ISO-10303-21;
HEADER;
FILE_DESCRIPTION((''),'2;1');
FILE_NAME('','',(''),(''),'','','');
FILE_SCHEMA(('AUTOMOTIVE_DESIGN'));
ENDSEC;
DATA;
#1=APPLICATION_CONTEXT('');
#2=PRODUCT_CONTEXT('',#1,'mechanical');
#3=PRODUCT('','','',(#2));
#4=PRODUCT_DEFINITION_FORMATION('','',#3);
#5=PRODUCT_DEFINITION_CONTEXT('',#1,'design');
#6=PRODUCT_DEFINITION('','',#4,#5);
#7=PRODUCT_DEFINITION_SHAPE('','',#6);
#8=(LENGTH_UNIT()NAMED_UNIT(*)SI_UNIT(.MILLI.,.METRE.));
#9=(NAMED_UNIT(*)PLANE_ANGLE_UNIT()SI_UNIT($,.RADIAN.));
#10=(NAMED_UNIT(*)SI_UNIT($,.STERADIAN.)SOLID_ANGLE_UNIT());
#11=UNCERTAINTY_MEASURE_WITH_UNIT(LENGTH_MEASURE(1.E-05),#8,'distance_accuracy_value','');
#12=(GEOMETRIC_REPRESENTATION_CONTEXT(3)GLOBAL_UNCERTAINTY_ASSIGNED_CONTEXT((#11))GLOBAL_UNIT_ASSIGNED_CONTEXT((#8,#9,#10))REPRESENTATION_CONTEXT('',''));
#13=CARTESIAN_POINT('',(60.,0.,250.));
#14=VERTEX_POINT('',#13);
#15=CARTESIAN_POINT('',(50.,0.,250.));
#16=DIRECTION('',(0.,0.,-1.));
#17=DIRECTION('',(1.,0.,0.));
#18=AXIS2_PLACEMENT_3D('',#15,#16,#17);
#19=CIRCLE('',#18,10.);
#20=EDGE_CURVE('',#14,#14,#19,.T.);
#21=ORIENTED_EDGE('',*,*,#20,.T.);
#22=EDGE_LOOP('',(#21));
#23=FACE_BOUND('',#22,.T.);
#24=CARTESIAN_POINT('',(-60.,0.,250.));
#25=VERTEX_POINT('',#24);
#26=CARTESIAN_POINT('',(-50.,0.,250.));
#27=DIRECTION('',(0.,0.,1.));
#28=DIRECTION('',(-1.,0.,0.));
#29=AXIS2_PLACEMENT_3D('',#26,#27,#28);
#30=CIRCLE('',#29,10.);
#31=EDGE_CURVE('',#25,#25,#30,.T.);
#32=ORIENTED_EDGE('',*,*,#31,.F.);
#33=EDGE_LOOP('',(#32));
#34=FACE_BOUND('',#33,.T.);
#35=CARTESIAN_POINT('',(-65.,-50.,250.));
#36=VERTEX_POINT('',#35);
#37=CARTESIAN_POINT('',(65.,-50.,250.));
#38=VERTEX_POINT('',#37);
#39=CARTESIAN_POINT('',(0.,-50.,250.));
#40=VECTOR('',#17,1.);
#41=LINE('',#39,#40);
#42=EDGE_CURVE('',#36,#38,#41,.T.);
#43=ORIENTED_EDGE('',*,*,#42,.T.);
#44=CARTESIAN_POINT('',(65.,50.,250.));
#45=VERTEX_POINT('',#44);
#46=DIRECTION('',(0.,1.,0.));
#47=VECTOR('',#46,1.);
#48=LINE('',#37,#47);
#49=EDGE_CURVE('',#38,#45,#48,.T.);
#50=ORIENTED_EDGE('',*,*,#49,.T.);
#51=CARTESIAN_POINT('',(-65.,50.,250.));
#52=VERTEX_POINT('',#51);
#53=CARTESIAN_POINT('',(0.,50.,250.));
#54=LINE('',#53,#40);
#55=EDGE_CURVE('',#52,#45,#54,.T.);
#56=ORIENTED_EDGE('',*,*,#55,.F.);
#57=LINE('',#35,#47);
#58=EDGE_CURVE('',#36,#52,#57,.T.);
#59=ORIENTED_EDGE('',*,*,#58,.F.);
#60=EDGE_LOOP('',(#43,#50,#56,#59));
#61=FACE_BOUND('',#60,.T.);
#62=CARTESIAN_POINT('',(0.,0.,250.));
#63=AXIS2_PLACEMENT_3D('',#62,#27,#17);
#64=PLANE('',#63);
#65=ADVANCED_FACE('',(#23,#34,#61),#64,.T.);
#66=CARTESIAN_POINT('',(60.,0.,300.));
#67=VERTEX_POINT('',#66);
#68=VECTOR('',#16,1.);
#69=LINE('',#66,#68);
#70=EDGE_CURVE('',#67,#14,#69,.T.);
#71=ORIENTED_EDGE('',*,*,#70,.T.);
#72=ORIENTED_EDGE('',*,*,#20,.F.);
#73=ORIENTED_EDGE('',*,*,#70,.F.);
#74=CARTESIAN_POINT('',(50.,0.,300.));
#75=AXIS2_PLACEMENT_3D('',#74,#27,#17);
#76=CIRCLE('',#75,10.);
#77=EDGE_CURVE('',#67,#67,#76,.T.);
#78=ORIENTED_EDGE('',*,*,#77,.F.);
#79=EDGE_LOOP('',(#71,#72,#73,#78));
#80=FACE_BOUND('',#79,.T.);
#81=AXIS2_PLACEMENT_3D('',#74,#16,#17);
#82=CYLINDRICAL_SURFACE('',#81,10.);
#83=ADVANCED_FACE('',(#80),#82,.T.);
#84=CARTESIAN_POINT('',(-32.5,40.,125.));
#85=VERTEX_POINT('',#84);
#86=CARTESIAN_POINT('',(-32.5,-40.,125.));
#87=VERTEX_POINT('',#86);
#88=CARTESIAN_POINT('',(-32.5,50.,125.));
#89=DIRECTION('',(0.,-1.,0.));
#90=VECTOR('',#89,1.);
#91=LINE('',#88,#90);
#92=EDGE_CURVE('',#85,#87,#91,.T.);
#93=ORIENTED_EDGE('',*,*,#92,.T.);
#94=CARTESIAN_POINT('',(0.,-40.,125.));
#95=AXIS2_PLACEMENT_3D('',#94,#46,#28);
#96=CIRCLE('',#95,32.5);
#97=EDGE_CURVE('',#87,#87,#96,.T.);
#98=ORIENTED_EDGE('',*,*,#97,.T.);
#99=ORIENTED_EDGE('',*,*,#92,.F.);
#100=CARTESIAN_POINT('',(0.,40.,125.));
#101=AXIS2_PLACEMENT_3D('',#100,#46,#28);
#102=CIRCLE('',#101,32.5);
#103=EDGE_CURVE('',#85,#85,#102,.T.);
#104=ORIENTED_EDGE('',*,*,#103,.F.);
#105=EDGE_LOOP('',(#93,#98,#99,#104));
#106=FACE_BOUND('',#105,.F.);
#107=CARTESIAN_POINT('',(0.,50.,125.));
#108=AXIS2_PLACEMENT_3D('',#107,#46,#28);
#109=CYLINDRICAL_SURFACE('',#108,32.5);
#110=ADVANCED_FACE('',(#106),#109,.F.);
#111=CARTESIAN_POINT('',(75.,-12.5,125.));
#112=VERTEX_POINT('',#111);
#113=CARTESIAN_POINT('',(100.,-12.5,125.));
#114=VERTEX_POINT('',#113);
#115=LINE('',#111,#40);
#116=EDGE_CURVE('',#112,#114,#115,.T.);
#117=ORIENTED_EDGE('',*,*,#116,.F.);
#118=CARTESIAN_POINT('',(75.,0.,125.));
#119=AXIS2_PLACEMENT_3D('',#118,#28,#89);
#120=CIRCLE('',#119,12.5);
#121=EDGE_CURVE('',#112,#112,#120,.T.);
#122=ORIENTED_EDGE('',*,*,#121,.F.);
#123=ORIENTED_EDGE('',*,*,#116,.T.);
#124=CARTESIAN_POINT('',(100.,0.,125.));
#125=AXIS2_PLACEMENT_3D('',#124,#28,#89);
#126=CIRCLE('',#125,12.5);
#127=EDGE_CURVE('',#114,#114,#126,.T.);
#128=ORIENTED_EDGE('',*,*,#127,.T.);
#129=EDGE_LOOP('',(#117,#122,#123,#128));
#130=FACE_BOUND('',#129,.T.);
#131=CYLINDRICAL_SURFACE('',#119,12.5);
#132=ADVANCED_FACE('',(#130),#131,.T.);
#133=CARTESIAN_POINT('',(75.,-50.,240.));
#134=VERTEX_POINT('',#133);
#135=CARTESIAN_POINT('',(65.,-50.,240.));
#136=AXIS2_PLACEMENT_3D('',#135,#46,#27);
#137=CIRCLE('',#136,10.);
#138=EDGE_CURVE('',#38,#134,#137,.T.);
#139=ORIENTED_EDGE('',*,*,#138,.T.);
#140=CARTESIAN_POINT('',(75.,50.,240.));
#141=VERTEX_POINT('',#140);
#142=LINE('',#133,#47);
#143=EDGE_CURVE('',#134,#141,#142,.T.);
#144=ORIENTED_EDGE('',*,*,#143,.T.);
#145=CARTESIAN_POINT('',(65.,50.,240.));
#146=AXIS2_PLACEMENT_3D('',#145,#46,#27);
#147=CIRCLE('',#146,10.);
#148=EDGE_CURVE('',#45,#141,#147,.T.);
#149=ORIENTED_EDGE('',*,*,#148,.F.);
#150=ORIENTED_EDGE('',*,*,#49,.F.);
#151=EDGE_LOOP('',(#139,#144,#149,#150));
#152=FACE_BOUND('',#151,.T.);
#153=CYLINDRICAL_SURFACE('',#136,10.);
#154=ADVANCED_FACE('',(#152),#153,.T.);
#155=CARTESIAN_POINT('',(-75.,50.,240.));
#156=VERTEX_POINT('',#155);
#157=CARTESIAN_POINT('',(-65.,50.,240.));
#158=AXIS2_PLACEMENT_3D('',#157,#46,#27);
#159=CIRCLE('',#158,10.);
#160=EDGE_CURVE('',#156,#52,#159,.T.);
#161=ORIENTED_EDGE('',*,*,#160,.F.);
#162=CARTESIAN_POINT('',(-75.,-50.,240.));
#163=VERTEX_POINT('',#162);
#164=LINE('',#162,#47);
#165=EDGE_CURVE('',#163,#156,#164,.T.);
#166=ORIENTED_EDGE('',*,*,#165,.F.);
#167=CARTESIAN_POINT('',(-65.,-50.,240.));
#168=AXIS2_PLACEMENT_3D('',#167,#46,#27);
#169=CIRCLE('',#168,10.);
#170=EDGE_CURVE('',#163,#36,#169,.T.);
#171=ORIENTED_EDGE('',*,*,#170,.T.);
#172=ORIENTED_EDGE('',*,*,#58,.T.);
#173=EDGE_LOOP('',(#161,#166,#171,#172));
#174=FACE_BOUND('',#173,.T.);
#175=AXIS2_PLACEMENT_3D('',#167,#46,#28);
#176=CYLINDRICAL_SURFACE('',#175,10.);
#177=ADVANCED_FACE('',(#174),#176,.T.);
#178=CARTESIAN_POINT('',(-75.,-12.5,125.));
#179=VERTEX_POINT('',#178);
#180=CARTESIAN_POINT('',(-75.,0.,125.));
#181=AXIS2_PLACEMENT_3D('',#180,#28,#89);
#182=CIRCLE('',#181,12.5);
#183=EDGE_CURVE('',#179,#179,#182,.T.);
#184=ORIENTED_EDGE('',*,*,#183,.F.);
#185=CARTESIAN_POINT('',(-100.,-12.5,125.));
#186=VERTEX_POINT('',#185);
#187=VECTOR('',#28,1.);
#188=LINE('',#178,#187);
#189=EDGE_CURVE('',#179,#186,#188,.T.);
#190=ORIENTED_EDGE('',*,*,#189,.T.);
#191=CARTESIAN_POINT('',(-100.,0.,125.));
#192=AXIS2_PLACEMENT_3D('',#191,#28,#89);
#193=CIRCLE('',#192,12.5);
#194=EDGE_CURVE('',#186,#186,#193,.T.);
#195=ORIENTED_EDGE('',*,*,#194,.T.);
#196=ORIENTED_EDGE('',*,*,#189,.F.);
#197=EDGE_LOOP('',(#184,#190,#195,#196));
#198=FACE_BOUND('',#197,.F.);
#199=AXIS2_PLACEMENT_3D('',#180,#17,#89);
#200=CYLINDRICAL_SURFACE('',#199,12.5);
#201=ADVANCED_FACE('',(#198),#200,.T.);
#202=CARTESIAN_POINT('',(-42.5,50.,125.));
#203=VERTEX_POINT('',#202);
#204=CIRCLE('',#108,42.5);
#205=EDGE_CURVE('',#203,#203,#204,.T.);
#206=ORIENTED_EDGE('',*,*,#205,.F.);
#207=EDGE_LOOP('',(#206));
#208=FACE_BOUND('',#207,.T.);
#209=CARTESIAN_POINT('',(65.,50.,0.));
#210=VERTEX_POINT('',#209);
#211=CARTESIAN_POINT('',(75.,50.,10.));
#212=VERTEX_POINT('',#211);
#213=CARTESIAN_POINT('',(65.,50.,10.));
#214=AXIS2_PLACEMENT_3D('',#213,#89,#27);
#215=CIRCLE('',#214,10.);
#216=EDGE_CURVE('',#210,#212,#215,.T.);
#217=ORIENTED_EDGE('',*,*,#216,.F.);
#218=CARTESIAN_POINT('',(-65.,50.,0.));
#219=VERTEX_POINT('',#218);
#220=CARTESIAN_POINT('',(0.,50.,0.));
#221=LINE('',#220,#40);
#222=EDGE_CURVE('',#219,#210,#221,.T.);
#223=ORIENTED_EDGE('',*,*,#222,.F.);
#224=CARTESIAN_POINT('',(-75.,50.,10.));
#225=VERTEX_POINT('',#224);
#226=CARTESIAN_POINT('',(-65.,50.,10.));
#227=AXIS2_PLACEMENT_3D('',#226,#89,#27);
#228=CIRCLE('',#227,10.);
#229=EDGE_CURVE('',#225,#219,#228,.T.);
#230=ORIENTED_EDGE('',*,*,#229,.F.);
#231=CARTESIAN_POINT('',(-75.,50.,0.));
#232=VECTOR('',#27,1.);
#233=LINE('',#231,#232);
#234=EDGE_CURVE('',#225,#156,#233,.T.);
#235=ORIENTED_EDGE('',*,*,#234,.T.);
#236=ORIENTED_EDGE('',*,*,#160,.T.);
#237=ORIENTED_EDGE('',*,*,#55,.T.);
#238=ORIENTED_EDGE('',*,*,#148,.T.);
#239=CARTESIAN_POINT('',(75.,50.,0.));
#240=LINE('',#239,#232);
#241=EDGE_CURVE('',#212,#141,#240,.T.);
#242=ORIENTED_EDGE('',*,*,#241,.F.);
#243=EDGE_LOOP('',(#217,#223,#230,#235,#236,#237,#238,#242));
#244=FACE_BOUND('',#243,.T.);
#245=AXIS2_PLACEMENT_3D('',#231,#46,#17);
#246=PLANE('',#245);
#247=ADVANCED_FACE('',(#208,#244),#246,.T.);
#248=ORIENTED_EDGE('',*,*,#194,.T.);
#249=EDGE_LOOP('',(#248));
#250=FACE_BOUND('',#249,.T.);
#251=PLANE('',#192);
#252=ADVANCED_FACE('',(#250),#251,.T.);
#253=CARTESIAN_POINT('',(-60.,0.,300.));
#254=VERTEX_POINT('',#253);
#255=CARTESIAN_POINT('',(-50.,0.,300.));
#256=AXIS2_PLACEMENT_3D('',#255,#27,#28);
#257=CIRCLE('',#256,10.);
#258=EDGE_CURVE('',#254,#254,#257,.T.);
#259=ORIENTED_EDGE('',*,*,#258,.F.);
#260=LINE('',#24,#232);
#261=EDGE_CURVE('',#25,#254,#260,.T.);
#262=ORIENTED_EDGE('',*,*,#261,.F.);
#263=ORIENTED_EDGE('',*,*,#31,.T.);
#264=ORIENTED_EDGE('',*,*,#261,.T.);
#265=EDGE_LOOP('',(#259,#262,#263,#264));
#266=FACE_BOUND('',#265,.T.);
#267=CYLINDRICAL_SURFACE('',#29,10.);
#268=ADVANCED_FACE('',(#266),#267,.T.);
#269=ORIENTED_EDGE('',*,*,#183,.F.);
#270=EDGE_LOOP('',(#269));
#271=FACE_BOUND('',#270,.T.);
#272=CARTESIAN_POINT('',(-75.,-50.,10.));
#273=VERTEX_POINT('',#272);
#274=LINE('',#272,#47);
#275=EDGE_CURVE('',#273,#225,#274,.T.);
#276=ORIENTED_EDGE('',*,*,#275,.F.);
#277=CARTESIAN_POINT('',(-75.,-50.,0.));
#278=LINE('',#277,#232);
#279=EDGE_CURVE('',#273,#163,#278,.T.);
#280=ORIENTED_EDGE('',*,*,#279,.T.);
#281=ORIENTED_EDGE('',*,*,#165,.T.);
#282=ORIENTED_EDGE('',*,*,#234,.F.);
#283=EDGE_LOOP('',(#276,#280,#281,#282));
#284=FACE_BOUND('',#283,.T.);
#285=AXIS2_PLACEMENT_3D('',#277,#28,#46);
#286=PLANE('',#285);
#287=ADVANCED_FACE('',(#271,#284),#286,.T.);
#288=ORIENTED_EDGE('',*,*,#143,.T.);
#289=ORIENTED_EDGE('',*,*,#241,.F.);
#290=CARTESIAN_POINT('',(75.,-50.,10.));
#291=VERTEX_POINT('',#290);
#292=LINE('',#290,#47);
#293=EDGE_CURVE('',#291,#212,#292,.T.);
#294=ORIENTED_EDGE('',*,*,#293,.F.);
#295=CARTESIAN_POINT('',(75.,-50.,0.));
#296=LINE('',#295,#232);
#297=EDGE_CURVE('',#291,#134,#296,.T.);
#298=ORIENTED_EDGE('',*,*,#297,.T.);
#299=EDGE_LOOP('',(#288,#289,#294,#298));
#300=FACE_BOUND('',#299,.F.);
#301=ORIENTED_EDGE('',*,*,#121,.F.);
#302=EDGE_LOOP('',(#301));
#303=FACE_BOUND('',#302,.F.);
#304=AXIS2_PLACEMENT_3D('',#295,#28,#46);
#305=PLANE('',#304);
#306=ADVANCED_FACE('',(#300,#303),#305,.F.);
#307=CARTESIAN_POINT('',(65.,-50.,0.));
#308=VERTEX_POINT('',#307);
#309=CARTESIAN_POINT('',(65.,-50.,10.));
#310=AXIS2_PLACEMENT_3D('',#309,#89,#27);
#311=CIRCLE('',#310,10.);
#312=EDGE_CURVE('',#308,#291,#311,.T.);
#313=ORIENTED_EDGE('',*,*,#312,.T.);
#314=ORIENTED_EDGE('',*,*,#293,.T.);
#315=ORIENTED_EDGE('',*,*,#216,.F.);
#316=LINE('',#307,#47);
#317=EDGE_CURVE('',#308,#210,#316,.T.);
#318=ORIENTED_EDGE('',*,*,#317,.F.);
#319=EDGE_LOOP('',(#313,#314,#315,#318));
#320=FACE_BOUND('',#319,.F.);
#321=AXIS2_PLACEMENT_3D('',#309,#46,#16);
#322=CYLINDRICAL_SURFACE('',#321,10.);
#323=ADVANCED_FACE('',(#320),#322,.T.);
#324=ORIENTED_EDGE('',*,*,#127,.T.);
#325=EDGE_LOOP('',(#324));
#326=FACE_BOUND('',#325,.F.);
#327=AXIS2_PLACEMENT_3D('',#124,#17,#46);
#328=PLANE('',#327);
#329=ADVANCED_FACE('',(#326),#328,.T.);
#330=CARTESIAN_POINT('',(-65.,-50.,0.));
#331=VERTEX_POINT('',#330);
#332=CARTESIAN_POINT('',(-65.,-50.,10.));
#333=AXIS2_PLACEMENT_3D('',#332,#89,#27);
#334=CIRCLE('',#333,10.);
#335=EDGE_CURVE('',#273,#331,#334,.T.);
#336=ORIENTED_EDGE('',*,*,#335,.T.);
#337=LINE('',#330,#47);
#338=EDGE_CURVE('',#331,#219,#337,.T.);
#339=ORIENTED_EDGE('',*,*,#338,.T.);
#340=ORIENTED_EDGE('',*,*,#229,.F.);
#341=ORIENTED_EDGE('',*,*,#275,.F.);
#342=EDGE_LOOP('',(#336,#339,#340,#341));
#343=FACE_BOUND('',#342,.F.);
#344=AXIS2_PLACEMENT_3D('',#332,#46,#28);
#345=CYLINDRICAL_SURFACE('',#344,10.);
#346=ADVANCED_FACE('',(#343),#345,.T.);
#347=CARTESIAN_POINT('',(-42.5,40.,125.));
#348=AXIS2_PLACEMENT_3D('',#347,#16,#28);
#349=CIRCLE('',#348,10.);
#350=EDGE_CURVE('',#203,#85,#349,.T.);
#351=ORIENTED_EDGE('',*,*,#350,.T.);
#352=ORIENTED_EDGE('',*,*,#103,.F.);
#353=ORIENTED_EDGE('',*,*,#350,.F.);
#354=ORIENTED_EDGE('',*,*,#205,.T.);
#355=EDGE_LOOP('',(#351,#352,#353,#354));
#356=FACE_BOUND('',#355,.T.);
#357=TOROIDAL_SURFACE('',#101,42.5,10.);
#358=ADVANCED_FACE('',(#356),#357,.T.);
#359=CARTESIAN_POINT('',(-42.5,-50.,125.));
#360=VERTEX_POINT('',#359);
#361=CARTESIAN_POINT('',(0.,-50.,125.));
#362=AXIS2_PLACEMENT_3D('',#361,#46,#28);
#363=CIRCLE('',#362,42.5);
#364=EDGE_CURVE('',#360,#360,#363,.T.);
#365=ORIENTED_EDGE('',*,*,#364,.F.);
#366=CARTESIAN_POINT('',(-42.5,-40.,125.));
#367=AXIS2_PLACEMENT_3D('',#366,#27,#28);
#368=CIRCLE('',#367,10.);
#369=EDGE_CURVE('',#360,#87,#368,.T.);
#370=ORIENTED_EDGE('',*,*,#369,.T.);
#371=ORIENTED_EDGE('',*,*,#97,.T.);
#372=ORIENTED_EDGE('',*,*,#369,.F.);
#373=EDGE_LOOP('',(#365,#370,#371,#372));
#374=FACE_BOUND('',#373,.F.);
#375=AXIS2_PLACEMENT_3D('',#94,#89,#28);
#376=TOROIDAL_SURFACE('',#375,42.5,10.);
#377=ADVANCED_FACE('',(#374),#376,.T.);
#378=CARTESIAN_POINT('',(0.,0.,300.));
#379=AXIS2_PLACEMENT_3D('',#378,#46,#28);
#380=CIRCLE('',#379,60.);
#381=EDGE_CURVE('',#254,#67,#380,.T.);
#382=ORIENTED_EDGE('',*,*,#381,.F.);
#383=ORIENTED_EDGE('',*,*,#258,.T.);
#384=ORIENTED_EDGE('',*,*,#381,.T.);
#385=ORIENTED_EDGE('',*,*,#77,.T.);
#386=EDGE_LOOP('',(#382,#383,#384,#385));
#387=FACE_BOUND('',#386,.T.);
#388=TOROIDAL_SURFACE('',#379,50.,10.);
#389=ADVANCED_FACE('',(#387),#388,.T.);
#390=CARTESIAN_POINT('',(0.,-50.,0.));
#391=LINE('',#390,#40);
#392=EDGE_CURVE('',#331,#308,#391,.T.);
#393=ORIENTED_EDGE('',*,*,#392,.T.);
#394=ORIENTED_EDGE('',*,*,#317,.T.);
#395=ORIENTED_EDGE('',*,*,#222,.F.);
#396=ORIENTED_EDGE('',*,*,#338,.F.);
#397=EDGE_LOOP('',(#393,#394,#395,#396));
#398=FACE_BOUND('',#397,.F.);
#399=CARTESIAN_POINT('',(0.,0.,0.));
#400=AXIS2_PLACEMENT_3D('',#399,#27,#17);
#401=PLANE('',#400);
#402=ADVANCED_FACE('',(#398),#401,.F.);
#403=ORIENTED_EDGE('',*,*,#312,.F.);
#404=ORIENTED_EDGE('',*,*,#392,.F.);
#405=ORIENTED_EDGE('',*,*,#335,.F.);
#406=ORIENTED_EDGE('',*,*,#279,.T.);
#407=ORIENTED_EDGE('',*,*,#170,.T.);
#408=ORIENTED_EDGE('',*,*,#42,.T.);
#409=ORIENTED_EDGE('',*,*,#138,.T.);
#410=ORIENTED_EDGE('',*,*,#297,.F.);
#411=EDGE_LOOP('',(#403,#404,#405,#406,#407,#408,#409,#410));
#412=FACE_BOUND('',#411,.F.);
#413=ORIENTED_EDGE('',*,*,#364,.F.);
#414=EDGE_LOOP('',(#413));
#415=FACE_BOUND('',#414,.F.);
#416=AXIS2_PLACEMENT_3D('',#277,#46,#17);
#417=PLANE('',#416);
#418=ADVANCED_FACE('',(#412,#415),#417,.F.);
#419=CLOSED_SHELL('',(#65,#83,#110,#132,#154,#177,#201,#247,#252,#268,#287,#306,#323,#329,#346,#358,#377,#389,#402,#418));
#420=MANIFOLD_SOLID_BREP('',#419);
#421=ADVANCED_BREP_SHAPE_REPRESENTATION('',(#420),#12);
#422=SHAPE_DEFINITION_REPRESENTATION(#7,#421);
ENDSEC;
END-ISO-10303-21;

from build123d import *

# Parameters (mm, degrees)
F0_W     = 150
F0_H     = 100
F1_DEPTH = 250
F2_R     = 32.5
F3_DEPTH = 100.001
F4_R     = 10
F5_R     = 12.5
F6_DEPTH = 25
F7_R     = 10


# Not quite as in the source:
# - a pattern or mirror of a feature is missing from the dataset's text; its kind, count and spacing are read off the source's solid


with BuildPart() as f1:
    # F0 (on Top) → F1 (new body)
    with BuildSketch(Plane.XY):
        Rectangle(F0_W, F0_H)
    extrude(amount=F1_DEPTH)

    # F2 (on face) → F3 (cut, through all)
    with BuildSketch(Plane(origin=(0, 50, 0), x_dir=(-1, 0, 0), z_dir=(0, 1, 0))):
        with Locations((0, 125)):
            Circle(F2_R)
    extrude(amount=-F3_DEPTH, mode=Mode.SUBTRACT)

    # F4
    f4_edges = [f1.edges().sort_by_distance(p)[0] for p in [
        (-75, 0, 250),
        (75, 0, 250),
        (75, 0, 0),
        (-75, 0, 0),
        (32.5, -50, 125),
        (32.5, 50, 125),
    ]]
    fillet(f4_edges, radius=F4_R)

    # F5 (on face) → F6 (join)
    with BuildSketch(Plane(origin=(-75, 0, 0), x_dir=(0, -1, 0), z_dir=(-1, 0, 0))):
        with Locations((0, 125)):
            Circle(F5_R)
    f6 = extrude(amount=F6_DEPTH)

    # F6_copies: F6 across plane
    add(f6.mirror(Plane(origin=(0, 0, 0), x_dir=(0, 0, 1), z_dir=(1, 0, 0))))

    # F9: sweep along a path in F8
    with BuildLine(Plane.XZ) as f9_path:
        Line((-50, 250), (-50, 300))
        ThreePointArc((-50, 300), (0, 350), (50, 300))
        Line((50, 300), (50, 250))
    # F7 (on face) → F9 (sweep)
    with BuildSketch(Plane.XY.offset(250)):
        with Locations((50, 0)):
            Circle(F7_R)
    sweep(path=f9_path.line)


solid = f1.part
